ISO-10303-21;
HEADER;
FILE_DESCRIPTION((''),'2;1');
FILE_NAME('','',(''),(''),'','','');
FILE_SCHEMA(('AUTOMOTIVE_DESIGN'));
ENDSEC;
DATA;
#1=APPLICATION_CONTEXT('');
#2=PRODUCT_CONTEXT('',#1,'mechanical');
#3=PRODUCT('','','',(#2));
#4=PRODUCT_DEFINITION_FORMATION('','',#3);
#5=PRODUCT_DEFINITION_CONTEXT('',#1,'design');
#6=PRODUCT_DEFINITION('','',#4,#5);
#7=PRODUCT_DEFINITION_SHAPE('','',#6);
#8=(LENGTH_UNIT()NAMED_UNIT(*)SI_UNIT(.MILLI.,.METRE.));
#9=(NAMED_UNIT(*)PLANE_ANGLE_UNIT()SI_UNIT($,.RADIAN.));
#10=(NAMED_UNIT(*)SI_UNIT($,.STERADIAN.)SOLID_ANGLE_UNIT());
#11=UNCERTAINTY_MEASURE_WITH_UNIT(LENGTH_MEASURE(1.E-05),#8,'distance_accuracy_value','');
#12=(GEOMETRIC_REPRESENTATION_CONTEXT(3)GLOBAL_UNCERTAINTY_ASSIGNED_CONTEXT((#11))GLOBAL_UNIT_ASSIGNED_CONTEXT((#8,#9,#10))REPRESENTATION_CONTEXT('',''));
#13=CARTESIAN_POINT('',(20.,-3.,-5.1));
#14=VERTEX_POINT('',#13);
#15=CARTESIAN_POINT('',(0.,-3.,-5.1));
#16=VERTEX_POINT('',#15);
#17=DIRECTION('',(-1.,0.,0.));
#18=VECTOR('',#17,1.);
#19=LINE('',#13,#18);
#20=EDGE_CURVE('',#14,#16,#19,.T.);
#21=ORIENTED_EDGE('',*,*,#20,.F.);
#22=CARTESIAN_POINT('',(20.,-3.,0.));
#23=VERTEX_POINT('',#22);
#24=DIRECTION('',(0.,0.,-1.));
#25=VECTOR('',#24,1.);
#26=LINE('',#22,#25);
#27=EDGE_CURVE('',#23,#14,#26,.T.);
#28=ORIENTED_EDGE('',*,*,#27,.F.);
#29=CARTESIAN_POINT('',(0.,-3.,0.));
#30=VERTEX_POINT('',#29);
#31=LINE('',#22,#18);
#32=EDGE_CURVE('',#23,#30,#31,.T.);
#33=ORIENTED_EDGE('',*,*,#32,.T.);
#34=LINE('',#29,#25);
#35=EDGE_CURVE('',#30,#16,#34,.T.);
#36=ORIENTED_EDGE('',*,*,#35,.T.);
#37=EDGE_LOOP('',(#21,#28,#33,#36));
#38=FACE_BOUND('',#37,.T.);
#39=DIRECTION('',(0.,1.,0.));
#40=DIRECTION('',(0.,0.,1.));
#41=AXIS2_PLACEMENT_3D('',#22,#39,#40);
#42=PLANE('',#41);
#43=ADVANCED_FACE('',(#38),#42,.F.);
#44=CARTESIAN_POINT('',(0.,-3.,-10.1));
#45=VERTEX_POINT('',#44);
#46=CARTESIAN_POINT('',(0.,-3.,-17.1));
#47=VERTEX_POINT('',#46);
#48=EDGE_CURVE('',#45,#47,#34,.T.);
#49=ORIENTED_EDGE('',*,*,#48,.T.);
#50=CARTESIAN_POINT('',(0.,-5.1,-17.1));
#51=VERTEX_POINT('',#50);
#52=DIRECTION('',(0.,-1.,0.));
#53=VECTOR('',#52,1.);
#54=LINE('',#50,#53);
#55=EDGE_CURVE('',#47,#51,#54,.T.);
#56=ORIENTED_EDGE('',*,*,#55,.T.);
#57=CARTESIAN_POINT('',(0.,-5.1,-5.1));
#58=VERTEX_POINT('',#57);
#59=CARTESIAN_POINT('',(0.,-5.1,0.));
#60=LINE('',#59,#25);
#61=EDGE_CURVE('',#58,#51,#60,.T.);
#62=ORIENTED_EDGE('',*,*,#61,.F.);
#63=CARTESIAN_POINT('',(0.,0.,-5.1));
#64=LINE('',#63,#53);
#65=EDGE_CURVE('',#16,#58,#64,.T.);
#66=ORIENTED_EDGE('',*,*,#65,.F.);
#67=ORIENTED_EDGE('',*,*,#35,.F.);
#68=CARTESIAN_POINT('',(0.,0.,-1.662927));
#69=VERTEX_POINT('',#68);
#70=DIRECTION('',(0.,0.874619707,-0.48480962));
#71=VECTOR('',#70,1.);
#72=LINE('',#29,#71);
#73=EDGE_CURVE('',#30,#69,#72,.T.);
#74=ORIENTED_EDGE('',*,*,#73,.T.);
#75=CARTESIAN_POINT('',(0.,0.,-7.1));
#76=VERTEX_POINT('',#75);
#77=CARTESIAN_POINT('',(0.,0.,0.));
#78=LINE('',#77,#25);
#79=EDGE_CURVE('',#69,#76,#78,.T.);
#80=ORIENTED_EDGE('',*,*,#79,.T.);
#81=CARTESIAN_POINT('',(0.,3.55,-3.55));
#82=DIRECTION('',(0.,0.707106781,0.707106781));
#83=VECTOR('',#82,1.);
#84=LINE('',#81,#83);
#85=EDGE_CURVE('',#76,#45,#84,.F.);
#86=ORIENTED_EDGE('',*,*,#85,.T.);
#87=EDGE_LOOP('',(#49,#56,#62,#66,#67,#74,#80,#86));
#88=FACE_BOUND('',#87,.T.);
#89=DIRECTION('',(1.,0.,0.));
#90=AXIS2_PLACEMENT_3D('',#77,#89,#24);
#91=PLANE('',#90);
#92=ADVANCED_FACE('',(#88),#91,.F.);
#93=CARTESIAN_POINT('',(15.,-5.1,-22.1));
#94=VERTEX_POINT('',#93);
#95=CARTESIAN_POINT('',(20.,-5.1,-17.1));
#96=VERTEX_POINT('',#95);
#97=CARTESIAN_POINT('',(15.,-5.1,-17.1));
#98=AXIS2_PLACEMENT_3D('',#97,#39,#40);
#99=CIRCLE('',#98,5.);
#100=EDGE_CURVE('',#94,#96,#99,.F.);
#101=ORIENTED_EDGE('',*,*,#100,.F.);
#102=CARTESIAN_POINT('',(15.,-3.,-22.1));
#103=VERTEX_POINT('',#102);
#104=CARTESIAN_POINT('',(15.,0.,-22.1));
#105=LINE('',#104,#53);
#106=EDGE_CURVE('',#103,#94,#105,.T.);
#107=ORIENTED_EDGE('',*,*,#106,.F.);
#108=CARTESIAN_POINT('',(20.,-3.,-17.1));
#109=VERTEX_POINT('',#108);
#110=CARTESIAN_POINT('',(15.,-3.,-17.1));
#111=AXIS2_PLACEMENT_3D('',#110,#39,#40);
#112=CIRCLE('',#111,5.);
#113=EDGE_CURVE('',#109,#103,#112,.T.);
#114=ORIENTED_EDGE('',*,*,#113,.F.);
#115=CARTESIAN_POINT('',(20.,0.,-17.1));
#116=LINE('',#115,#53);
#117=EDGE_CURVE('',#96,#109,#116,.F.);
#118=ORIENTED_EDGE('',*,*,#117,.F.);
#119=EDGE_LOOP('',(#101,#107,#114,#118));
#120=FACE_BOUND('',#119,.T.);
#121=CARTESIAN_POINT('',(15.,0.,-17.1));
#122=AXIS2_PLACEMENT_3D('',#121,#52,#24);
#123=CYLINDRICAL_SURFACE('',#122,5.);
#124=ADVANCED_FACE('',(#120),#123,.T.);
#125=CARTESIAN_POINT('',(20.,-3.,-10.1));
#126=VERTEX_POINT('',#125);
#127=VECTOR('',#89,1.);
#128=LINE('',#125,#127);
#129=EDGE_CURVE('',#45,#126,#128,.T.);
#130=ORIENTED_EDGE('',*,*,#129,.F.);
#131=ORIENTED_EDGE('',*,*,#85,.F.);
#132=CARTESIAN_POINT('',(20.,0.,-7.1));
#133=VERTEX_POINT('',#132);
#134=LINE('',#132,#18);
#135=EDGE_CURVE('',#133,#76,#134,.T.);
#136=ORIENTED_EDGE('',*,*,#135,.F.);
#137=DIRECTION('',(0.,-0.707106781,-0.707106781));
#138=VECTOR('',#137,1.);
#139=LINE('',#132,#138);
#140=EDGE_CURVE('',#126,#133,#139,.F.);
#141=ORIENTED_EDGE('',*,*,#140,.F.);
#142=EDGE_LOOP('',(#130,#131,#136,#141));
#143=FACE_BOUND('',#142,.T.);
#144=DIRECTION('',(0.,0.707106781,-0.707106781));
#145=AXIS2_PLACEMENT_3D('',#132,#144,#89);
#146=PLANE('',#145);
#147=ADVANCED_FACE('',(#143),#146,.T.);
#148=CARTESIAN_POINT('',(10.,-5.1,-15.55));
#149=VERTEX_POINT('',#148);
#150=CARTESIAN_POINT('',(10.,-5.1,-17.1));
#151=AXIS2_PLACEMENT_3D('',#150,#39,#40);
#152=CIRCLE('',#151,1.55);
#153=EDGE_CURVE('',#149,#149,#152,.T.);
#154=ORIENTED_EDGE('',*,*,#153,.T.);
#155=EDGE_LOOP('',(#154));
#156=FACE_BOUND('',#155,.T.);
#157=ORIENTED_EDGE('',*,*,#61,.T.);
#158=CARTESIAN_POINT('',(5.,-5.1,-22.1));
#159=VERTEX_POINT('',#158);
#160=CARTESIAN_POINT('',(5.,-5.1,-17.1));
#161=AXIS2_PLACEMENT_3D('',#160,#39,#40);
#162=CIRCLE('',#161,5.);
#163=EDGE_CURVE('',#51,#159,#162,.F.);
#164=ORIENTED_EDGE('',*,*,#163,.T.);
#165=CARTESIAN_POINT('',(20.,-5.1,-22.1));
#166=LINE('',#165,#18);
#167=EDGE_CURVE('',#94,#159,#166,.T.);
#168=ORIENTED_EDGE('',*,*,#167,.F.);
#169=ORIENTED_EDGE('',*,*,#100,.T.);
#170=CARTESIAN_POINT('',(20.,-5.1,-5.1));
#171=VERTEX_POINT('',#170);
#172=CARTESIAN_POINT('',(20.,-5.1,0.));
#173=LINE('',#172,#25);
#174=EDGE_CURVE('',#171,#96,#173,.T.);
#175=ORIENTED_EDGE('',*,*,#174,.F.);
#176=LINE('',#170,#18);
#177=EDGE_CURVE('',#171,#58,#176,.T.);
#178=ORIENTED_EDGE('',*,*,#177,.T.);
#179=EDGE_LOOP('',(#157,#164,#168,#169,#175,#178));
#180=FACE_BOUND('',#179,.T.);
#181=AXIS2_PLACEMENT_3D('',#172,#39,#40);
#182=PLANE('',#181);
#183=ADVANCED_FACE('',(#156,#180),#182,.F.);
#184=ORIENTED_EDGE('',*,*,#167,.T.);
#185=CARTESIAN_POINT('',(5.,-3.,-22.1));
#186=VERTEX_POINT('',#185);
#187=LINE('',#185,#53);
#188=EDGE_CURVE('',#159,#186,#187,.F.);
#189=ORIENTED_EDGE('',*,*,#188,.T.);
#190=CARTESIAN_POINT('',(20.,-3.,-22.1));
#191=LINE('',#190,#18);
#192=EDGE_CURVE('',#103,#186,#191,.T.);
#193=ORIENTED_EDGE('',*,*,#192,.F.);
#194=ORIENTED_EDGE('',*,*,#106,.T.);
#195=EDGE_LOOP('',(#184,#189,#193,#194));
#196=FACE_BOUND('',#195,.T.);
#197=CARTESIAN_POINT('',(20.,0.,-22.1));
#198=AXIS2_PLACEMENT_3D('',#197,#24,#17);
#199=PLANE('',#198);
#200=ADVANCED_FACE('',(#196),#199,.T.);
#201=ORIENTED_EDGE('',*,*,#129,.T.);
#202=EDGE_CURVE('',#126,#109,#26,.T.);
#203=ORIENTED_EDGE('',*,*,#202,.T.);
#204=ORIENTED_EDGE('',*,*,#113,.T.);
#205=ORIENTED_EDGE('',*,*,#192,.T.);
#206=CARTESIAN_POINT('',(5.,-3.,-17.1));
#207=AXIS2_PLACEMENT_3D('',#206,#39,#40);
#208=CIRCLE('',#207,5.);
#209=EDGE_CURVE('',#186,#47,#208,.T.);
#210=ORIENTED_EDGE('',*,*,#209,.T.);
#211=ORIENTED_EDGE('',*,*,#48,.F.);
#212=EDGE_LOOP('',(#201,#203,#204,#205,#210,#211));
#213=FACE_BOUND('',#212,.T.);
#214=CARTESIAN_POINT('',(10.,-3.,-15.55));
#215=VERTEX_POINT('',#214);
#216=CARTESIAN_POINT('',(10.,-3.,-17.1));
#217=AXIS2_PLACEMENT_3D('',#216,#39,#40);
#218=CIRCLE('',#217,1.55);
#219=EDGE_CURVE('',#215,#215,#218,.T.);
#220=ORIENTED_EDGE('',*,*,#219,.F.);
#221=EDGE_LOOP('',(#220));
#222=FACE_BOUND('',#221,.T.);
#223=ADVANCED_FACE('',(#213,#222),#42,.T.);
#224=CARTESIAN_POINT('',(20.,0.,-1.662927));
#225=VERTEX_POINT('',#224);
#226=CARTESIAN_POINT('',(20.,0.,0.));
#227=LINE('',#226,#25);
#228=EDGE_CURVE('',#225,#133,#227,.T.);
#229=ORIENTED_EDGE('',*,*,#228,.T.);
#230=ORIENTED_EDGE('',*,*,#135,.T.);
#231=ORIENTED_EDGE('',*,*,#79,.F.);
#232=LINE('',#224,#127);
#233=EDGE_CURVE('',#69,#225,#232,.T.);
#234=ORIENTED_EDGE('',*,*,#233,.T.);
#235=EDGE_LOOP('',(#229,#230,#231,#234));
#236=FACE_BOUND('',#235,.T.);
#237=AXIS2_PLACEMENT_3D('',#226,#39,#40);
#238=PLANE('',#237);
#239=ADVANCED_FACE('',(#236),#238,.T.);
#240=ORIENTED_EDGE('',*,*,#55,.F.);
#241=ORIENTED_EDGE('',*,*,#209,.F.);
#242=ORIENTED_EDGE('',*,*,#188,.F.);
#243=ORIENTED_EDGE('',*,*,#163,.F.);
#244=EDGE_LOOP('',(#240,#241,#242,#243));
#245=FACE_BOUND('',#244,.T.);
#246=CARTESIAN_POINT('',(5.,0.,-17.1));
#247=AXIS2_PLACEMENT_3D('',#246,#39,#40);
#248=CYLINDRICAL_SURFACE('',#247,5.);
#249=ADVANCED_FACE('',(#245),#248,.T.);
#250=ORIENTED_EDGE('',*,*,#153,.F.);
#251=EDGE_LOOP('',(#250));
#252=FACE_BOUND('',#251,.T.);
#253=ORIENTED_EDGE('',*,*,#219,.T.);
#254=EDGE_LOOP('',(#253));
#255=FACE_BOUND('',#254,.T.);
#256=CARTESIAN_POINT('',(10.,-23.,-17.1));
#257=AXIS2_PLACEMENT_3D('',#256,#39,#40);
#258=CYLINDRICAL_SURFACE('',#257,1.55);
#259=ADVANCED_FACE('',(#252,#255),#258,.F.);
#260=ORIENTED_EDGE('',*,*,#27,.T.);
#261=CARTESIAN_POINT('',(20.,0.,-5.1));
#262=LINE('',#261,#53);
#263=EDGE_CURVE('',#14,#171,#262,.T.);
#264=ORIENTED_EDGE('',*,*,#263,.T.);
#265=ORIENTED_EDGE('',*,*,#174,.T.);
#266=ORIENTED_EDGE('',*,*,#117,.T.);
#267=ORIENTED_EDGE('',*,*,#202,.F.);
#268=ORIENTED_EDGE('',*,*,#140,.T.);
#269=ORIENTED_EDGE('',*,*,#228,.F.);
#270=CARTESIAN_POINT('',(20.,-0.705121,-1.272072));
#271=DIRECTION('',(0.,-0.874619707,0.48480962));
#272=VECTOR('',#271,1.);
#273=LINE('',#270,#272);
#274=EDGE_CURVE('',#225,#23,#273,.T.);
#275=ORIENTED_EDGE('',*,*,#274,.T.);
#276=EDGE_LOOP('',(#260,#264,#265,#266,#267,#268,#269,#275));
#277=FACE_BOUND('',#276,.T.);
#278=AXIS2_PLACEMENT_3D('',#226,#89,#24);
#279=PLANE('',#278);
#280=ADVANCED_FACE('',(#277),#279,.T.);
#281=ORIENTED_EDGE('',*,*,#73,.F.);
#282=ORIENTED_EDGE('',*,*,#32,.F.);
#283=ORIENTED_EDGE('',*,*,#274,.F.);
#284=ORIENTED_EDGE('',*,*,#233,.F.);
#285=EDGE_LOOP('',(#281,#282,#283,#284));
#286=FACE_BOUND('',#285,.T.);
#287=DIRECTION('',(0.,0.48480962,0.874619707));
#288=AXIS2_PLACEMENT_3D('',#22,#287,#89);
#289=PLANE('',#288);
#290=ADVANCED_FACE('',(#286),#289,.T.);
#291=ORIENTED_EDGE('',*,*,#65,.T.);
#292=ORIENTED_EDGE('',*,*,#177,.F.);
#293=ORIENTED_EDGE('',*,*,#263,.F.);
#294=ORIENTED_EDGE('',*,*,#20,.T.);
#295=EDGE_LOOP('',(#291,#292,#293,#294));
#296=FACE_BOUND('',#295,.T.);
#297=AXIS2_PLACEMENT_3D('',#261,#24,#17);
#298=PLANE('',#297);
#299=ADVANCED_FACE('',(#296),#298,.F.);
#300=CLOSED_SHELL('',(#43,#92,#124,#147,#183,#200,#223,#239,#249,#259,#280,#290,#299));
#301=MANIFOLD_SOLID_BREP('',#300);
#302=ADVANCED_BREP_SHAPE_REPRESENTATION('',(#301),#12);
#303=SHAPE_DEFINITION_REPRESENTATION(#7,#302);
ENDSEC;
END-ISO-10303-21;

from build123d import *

# Parameters (mm, degrees)
SKETCH1_W           = 7.1
SKETCH1_H           = 3
BOSS_EXTRUDE1_DEPTH = 20
SKETCH2_R           = 1.55
CUT_EXTRUDE1_DEPTH  = 20
FILLET1_R           = 5
CHAMFER1_SIZE       = 3
CHAMFER2_SIZE       = 1.662927154
CHAMFER2_SIZE_2     = 3


# Some blends are built 0.0001 mm under size
with BuildPart() as part:
    # Sketch1 → Boss-Extrude1 (new body)
    with BuildSketch(Plane(origin=(0, 0, 0), x_dir=(0, 0, -1), z_dir=(1, 0, 0))):
        with Locations((3.55, -1.5)):
            Rectangle(SKETCH1_W, SKETCH1_H)
        Polygon((22.1, -3), (7.1, -3), (5.1, -3), (5.1, -5.1), (22.1, -5.1), align=None)
    extrude(amount=BOSS_EXTRUDE1_DEPTH)

    # Sketch2 → Cut-Extrude1 (cut)
    with BuildSketch(Plane(origin=(0, -3, 0), x_dir=(1, 0, 0), z_dir=(0, 1, 0))):
        with Locations(Location((10, 17.1, 0), (0, 0, 270))):
            Circle(SKETCH2_R)
    extrude(amount=-CUT_EXTRUDE1_DEPTH, mode=Mode.SUBTRACT)

    # Fillet1
    fillet1_edges = [part.edges().sort_by_distance(p)[0] for p in [
        (0, -4.05, -22.1),
        (20, -4.05, -22.1),
    ]]
    fillet(fillet1_edges, radius=FILLET1_R)

    # Chamfer1
    chamfer1_edges = [part.edges().sort_by_distance(p)[0] for p in [
        (10, -3, -7.1),
    ]]
    chamfer(chamfer1_edges, length=CHAMFER1_SIZE - 0.0001)  # a hair under: the kernel refuses the full size

    # Chamfer2
    # the kernel refuses this chamfer: 3, 1.662927154 mm, written as the material it takes off along each edge
    with BuildSketch(Plane(origin=(-7.763748365, 0, 0), x_dir=(0, 0.06086775916528878, -0.9981458389905739), z_dir=(1, 0, 0))) as chamfer2_piece_1:
        Polygon((CHAMFER2_SIZE * 0.998145839206, -CHAMFER2_SIZE * 0.0608677591784), (-CHAMFER2_SIZE_2 * 0.0608677591653, -CHAMFER2_SIZE_2 * 0.998145838991), (0, 0), align=None)
    extrude(amount=35.527496731, mode=Mode.SUBTRACT)


solid = part.part
